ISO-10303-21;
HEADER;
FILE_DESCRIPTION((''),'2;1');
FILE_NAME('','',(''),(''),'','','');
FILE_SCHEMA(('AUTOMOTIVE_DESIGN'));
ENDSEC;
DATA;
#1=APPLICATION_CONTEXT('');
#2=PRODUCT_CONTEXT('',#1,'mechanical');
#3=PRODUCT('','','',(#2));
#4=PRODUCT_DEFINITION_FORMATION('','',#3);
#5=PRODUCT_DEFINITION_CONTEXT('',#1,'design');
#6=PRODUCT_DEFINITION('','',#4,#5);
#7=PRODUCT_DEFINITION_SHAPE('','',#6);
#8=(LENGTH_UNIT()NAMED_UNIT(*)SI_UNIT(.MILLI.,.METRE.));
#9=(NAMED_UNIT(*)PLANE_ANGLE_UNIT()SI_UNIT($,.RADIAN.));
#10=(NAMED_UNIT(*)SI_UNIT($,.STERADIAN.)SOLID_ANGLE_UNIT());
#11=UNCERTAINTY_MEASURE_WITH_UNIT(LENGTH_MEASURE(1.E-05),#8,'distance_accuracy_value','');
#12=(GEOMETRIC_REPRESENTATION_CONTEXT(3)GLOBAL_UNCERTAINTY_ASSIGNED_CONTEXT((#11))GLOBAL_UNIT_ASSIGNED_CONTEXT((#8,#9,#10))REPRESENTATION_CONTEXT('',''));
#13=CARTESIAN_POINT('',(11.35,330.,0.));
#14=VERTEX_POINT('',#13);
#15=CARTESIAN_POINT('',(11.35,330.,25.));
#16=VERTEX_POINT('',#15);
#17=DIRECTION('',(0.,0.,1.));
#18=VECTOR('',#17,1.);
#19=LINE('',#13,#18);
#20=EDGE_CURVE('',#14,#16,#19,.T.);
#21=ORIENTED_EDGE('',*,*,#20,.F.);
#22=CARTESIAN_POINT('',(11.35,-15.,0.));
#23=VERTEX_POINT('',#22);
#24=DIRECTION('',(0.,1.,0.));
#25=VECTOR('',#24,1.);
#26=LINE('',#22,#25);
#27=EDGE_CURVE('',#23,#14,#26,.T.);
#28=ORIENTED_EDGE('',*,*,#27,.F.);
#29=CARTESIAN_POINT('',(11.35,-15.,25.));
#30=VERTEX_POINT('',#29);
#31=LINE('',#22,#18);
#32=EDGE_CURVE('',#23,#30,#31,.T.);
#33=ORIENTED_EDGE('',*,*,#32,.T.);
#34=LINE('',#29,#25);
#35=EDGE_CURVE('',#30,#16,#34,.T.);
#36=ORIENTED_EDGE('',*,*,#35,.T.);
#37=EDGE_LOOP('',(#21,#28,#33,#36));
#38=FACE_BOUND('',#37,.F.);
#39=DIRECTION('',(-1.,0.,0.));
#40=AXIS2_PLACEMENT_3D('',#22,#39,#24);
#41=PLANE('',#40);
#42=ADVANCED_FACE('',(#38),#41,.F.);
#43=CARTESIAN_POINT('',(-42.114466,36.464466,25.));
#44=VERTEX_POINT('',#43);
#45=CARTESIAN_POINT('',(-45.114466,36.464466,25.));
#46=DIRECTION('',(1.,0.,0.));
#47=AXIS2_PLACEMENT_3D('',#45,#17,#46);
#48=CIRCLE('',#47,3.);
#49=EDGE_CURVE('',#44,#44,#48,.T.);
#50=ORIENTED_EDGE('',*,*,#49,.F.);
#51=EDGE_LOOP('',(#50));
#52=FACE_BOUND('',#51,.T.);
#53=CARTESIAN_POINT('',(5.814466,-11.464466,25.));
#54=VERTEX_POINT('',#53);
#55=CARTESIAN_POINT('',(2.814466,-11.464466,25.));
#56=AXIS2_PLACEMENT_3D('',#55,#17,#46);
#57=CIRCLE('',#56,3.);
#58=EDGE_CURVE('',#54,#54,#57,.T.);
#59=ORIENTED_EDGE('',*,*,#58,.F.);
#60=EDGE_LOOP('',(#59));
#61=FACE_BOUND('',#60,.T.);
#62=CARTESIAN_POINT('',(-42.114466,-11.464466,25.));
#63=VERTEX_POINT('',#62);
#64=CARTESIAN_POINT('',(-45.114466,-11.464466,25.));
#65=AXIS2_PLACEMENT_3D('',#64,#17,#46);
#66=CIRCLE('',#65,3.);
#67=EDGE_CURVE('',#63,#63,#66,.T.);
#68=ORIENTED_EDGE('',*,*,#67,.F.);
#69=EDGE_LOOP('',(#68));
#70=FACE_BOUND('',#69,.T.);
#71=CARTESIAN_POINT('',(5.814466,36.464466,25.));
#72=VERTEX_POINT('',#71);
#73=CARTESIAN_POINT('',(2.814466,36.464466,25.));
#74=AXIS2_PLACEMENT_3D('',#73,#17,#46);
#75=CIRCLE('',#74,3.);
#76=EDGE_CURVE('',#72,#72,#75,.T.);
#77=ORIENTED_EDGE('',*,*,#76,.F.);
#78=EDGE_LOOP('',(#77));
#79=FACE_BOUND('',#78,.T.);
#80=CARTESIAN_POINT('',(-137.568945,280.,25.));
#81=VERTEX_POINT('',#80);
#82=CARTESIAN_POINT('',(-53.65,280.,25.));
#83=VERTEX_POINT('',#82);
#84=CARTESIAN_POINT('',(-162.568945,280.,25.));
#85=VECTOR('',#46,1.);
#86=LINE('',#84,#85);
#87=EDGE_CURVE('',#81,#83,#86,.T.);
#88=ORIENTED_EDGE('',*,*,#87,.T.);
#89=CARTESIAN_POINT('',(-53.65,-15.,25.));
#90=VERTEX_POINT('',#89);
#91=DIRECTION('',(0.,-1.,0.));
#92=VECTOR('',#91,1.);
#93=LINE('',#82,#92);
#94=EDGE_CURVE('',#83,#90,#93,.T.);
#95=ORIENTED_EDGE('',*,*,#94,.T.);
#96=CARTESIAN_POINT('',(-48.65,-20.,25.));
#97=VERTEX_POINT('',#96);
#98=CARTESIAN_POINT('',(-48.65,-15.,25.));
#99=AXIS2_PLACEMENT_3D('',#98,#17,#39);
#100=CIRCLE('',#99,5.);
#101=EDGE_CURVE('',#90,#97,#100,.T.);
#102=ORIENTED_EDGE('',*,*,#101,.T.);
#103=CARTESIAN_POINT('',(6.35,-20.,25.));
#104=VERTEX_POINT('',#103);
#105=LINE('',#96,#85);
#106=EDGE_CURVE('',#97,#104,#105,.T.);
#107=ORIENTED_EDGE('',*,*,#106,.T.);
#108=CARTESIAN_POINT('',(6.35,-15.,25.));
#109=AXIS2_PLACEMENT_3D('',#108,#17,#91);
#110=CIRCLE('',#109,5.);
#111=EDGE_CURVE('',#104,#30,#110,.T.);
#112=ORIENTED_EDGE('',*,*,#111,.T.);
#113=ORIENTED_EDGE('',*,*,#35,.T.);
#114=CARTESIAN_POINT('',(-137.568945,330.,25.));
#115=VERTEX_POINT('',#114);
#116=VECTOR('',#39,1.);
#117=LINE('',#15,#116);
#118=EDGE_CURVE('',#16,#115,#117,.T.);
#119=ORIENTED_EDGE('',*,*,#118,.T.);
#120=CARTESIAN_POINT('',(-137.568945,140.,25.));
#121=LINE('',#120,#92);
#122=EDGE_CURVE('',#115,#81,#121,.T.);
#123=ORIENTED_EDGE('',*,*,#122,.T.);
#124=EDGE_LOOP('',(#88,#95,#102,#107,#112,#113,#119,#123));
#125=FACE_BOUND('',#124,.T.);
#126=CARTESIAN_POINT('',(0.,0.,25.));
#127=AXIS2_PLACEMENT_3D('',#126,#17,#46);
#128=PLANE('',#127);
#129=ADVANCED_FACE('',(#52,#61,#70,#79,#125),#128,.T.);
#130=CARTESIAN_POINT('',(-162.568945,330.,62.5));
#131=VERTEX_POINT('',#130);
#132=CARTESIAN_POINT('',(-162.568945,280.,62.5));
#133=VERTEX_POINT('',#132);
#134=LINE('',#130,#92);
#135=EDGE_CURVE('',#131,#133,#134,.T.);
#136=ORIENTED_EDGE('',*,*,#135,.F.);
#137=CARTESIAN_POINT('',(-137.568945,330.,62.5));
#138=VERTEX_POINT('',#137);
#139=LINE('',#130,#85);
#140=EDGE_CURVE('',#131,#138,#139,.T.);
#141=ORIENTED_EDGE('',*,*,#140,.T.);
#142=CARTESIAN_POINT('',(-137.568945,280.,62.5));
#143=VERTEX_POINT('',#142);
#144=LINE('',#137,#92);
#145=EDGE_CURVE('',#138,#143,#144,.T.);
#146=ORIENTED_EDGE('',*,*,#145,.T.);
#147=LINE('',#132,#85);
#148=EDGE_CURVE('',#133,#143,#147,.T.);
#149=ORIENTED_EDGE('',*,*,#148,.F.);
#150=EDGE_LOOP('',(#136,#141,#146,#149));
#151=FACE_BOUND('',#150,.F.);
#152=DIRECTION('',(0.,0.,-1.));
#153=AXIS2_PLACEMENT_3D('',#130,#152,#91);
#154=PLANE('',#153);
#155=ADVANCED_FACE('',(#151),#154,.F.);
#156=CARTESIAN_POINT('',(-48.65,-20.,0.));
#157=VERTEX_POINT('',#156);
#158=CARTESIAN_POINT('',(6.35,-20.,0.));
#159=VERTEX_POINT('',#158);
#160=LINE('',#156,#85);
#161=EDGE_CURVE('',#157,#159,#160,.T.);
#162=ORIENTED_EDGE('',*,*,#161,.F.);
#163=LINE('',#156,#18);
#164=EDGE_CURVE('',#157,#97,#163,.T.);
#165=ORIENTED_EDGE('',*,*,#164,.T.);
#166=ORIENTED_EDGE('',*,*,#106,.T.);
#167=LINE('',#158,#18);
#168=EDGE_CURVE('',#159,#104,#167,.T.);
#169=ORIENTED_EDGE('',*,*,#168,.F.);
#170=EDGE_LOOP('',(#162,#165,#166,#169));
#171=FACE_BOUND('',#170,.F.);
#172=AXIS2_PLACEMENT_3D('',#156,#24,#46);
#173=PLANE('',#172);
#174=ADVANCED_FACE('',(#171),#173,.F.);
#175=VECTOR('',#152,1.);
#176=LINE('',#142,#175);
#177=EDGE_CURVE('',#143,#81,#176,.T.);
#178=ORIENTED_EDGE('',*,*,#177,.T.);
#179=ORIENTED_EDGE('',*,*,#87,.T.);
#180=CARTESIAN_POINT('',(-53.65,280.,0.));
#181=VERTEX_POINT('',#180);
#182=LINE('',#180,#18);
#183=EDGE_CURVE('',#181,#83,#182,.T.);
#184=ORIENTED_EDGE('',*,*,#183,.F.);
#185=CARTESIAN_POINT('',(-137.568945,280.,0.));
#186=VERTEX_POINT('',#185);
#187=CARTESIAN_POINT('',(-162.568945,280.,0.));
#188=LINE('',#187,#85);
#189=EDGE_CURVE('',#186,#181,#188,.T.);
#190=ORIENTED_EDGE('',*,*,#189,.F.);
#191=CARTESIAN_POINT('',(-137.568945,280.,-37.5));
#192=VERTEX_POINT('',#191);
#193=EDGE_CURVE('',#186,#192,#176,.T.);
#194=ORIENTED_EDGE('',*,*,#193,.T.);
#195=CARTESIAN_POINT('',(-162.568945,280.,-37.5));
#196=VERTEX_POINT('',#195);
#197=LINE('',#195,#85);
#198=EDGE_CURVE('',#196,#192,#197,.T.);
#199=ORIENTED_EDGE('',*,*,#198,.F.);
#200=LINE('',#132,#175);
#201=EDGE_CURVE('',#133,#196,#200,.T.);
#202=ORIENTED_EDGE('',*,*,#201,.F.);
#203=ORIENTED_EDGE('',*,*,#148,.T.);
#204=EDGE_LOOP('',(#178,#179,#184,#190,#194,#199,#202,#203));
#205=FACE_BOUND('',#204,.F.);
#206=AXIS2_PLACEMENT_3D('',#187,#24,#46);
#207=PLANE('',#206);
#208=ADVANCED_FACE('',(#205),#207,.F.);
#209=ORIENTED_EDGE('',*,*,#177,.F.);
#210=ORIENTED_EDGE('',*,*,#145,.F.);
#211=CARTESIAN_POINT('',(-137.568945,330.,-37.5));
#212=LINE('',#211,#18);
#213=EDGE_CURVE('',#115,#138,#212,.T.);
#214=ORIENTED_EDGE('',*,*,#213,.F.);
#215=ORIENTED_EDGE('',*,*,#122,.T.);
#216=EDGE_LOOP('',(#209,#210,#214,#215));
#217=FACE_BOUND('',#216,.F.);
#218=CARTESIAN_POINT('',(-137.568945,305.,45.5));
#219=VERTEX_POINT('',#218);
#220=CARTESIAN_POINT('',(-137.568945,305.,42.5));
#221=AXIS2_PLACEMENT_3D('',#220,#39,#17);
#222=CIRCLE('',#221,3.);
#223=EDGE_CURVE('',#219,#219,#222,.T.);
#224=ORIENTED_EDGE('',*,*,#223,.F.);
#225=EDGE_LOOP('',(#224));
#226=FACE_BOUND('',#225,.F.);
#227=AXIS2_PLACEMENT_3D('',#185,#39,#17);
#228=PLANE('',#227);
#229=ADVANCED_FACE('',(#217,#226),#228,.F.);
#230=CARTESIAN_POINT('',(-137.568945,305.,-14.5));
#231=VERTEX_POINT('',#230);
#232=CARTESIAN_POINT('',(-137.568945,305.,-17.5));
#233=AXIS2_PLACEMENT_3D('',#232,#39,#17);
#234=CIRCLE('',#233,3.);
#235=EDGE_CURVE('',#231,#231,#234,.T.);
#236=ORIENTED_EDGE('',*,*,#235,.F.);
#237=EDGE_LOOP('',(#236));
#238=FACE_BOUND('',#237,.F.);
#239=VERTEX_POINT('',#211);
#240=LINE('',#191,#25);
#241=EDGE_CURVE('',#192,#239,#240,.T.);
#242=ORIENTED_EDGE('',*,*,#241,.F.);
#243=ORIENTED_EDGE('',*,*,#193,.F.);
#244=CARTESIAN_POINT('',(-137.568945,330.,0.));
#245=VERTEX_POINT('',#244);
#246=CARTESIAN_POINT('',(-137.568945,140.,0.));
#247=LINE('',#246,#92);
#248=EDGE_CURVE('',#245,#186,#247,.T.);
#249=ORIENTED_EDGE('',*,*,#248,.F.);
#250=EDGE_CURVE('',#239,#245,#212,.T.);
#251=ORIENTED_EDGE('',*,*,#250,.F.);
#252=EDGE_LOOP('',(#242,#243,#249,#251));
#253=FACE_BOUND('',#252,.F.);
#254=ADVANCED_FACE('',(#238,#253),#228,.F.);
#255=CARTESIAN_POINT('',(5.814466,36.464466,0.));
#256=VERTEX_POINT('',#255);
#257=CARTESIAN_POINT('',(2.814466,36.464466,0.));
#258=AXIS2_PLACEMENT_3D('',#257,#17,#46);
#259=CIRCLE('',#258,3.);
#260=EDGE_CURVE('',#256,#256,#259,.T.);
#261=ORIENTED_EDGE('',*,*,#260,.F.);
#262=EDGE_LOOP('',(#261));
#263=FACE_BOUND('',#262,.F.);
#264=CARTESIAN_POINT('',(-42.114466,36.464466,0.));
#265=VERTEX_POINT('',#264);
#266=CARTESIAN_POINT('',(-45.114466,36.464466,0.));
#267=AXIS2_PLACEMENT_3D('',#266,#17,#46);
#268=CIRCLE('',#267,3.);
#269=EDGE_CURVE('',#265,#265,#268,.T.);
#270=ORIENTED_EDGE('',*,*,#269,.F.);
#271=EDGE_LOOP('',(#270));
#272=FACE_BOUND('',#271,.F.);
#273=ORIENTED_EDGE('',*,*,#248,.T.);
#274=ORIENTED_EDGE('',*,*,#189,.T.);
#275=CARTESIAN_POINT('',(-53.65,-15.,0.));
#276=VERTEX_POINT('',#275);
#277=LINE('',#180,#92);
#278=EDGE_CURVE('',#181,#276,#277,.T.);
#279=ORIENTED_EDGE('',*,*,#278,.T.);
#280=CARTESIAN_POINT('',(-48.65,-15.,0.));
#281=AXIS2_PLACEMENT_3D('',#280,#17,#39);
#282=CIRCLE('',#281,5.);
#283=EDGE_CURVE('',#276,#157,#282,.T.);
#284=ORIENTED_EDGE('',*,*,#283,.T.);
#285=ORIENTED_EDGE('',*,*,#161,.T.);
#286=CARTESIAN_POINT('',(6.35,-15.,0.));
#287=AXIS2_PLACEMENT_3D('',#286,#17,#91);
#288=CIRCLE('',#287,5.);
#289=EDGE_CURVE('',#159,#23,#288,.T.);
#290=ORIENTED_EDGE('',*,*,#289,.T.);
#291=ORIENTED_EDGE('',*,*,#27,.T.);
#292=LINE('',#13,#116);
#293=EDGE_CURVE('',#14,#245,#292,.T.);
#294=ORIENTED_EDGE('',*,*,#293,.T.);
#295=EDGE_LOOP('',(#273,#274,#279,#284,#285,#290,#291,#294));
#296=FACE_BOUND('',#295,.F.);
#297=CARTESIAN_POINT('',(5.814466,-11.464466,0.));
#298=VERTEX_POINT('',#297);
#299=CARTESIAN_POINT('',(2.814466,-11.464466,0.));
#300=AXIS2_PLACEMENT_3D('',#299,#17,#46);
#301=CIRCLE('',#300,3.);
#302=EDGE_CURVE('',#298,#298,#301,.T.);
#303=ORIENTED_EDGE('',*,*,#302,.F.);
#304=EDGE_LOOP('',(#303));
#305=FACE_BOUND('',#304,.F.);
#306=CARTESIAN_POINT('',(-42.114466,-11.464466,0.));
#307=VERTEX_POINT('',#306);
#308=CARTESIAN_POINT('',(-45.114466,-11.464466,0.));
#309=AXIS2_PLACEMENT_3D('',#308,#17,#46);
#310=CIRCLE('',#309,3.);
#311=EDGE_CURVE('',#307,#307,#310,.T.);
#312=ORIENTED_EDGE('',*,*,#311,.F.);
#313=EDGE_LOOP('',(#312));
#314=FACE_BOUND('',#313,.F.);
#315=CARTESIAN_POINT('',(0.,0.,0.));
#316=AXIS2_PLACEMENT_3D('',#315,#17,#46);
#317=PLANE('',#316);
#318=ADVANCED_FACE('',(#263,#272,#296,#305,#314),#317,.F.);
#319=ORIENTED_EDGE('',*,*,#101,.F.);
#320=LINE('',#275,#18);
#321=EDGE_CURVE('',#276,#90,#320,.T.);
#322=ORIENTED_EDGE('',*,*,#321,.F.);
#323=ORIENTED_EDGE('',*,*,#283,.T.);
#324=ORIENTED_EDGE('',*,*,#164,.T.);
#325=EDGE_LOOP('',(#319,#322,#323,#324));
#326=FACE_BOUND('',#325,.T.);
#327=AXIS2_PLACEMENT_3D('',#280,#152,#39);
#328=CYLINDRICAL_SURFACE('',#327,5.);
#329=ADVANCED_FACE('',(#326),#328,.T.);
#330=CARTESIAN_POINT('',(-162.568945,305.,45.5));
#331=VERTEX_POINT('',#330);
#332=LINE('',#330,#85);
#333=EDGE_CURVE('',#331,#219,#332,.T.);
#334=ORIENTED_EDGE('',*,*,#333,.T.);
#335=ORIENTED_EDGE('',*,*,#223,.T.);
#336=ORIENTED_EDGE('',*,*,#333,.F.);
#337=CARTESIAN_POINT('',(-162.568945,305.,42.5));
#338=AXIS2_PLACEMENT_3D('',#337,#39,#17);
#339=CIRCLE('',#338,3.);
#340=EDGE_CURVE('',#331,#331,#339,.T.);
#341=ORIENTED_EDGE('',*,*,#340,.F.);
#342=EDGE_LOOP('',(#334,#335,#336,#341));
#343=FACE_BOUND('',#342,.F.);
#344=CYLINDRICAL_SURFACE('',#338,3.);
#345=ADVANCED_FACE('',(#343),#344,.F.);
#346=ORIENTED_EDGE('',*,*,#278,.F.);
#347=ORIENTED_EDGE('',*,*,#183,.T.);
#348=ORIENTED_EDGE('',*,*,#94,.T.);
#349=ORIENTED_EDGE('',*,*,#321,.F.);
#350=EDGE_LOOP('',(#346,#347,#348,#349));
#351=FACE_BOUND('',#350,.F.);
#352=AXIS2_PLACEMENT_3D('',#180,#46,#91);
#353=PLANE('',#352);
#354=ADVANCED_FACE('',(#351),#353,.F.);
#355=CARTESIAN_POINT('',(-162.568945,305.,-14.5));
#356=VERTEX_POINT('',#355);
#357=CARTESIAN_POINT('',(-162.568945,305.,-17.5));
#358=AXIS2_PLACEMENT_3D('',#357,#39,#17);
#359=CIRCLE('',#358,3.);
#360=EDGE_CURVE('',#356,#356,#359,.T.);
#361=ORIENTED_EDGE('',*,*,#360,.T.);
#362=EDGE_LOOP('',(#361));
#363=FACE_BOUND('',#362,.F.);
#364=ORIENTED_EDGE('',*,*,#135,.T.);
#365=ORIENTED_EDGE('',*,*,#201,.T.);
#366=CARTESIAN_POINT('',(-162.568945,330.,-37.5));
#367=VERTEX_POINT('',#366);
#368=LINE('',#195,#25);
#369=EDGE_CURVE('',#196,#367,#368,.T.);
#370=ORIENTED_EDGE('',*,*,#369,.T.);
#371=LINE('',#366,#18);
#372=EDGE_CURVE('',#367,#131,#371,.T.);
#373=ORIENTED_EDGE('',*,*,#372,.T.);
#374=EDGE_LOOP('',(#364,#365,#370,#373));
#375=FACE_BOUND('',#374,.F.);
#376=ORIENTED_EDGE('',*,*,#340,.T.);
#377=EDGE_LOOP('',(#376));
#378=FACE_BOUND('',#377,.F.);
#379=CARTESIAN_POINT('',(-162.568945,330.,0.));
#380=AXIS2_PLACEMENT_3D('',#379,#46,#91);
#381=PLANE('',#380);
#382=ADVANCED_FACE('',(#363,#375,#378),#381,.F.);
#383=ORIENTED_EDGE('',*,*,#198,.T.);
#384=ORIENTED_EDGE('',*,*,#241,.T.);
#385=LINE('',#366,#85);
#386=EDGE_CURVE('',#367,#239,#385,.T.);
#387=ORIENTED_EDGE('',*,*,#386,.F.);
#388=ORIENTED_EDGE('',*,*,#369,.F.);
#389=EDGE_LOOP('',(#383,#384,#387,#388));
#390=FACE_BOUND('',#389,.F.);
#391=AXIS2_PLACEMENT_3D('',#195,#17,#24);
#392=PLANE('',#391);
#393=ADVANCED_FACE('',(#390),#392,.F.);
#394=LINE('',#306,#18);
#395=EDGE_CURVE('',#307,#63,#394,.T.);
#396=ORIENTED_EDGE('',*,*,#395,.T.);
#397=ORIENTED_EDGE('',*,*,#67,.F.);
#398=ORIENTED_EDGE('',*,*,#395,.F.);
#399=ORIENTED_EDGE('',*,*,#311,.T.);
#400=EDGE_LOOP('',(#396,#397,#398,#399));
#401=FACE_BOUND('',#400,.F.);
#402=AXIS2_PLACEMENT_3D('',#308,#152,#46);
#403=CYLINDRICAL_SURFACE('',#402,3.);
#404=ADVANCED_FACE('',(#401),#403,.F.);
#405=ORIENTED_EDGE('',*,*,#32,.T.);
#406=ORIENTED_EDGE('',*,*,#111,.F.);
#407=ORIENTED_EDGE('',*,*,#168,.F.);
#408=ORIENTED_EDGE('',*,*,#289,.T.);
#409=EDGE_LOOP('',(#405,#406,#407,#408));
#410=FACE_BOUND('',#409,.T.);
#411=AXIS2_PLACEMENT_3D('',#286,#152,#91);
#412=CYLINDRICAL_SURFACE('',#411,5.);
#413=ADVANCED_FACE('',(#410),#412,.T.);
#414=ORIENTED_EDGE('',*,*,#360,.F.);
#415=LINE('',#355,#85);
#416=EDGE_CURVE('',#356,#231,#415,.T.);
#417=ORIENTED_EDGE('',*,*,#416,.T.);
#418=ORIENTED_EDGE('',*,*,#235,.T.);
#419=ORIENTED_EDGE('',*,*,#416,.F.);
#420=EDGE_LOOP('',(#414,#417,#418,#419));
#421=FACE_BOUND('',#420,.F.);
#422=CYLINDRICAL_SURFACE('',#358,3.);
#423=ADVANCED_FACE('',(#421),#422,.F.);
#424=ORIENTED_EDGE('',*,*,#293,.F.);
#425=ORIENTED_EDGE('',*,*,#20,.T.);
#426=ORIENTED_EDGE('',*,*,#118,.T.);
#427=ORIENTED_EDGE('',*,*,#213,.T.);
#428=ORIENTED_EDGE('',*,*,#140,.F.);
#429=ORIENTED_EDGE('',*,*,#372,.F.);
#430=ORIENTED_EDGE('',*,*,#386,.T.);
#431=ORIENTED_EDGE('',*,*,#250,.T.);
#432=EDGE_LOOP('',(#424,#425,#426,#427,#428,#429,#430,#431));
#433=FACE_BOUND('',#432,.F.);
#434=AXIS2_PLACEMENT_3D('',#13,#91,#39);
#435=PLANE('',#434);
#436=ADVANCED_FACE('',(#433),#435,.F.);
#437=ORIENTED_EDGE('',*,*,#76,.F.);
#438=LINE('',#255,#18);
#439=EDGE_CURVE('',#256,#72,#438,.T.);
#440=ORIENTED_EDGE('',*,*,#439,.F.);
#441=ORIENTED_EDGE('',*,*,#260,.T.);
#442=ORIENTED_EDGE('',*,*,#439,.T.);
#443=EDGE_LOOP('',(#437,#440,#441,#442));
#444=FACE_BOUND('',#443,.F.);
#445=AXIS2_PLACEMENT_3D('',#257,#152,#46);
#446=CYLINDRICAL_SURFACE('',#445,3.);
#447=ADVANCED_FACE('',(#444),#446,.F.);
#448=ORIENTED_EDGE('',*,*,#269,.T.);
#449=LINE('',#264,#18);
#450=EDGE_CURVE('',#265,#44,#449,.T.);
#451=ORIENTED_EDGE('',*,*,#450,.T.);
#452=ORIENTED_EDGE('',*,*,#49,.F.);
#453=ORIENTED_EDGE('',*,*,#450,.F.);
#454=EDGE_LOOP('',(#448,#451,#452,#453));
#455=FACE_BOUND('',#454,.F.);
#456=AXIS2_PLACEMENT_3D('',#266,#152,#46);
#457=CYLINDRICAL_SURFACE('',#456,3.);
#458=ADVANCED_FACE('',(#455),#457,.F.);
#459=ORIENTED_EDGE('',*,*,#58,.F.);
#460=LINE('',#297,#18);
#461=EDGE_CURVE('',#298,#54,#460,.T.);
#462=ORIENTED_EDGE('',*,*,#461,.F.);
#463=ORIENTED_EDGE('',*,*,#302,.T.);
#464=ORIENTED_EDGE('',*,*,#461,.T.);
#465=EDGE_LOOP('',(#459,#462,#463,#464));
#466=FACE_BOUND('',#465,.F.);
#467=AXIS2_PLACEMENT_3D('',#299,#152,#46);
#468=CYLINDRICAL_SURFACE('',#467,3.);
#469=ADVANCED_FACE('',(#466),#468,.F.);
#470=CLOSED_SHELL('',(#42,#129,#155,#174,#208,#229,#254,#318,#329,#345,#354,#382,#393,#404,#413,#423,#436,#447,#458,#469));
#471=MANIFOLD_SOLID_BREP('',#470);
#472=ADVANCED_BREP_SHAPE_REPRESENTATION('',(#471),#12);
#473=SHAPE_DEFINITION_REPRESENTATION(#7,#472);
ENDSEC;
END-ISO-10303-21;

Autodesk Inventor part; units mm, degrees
ref_plane "YZ Plane" through (0, 0, 0) normal (1, 0, 0) x (0, 1, 0)
ref_plane "XZ Plane" through (0, 0, 0) normal (0, 1, 0) x (-1, 0, 0)
ref_plane "XY Plane" through (0, 0, 0) normal (0, 0, 1) x (1, 0, 0)
sketch "Sketch1" plane through (0, 0, 0) normal (0, 0, 1) x (1, 0, 0)
  line L0 (11.35, 40) -> (11.35, -15)
  line L1 (6.35, -20) -> (-48.65, -20)
  circle A0 centre (2.814466, -11.464466) radius 3
  circle A1 centre (-45.114466, -11.464466) radius 3
  circle A2 centre (-45.114466, 36.464466) radius 3
  circle A3 centre (2.814466, 36.464466) radius 3
  line L2 (-162.568945, -644.9995) -> (-162.568945, 135.0005)
  line L3 (11.35, -15) -> (11.35, 330)
  line L4 (-53.65, -15) -> (-53.65, 40)
  line L5 (-53.65, -15) -> (-53.65, 280)
  line L6 (11.35, 330) -> (-162.568945, 330)
  line L7 (-162.568945, 330) -> (-162.568945, 280)
  line L8 (-162.568945, 280) -> (-53.65, 280)
  line L9 (6.35, -20) -> (-48.65, -20)
  arc A4 (6.35, -20) -> (11.35, -15) centre (6.35, -15) ccw
  arc A5 (-53.65, -15) -> (-48.65, -20) centre (-48.65, -15) ccw
  circle A6 centre (2.814466, 36.464466) radius 3
  circle A7 centre (2.814466, -11.464466) radius 3
  circle A8 centre (-45.114466, -11.464466) radius 3
  circle A9 centre (-45.114466, 36.464466) radius 3
  point P0 (0, 0)
  dimension "d0" = 350
  dimension "d1" = 300
  dimension "d2" = 5
sketch "Sketch2" plane through (-162.568945, 280, 0) normal (-1, 0, 0) x (0, 0, 1)
  line L0 (0, 0) -> (25, 0)
  line L1 (0, 50) -> (25, 50)
  line L2 (25, 0) -> (25, 50)
  line L3 (-37.5, 50) -> (62.5, 50)
  line L4 (62.5, 50) -> (62.5, 0)
  line L5 (62.5, 0) -> (-37.5, 0)
  line L6 (-37.5, 0) -> (-37.5, 50)
  circle A0 centre (42.5, 25) radius 3
  circle A1 centre (-17.5, 25) radius 3
  point P0 (0, -280)
  point P1 (12.5, 50)
  point P2 (12.5, 50)
  point P3 (62.5, 25)
  point P4 (-37.5, 25)
  dimension "d4" = 50
  dimension "d5" = 50
  dimension "d6" = 25
  dimension "d7" = 20
  dimension "d8" = 20
  dimension "d9" = 6
sketch "Sketch1 outline for Plate1" plane through (0, 0, 0) normal (0, 0, 1) x (1, 0, 0)
  arc A0 (6.35, -20) -> (11.35, -15) centre (6.35, -15) ccw
  line L0 (-48.65, -20) -> (6.35, -20)
  line L1 (11.35, -15) -> (11.35, 330)
  arc A1 (-53.65, -15) -> (-48.65, -20) centre (-48.65, -15) ccw
  line L2 (11.35, 330) -> (-162.568945, 330)
  line L3 (-53.65, 280) -> (-53.65, -15)
  line L4 (-162.568945, 330) -> (-162.568945, 280)
  line L5 (-162.568945, 280) -> (-53.65, 280)
  circle A2 centre (-45.114466, -11.464466) radius 3
  circle A3 centre (2.814466, -11.464466) radius 3
  circle A4 centre (-45.114466, 36.464466) radius 3
  circle A5 centre (2.814466, 36.464466) radius 3
extrude "Plate1" add sketch "Sketch1 outline for Plate1" along normal blind 25
sketch "Sketch2 outline for Plate2" plane through (-162.568945, 280, 0) normal (-1, 0, 0) x (0, 0, 1)
  line L0 (-37.5, 50) -> (62.5, 50)
  line L1 (-37.5, 0) -> (-37.5, 50)
  line L2 (62.5, 50) -> (62.5, 0)
  line L3 (62.5, 0) -> (-37.5, 0)
  circle A0 centre (-17.5, 25) radius 3
  circle A1 centre (42.5, 25) radius 3
sheet face with bend "Face2" sketch "Sketch2 outline for Plate2" thickness 25 toward (1, 0, 0) bend radius 25
bend "Bend1"
equation "\"d3\" = Thickness"
equation "\"d10\" = BendRadius"
equation "\"d11\" = BendReliefWidth"
equation "\"d13\" = MinimumRemnant"
equation "\"d12\" = BendReliefDepth"
equation "\"d14\" = TransitionRadius"
equation "\"BendRadius\" = Thickness"
equation "\"BendReliefWidth\" = Thickness"
equation "\"BendReliefDepth\" = 0.5 * Thickness"
equation "\"TransitionRadius\" = BendRadius"
equation "\"JacobiRadiusSize\" = BendRadius"
equation "\"GapSize\" = Thickness"
equation "\"Thickness\" = 25"
equation "\"MinimumRemnant\" = 50"
properties part number "patas2"
